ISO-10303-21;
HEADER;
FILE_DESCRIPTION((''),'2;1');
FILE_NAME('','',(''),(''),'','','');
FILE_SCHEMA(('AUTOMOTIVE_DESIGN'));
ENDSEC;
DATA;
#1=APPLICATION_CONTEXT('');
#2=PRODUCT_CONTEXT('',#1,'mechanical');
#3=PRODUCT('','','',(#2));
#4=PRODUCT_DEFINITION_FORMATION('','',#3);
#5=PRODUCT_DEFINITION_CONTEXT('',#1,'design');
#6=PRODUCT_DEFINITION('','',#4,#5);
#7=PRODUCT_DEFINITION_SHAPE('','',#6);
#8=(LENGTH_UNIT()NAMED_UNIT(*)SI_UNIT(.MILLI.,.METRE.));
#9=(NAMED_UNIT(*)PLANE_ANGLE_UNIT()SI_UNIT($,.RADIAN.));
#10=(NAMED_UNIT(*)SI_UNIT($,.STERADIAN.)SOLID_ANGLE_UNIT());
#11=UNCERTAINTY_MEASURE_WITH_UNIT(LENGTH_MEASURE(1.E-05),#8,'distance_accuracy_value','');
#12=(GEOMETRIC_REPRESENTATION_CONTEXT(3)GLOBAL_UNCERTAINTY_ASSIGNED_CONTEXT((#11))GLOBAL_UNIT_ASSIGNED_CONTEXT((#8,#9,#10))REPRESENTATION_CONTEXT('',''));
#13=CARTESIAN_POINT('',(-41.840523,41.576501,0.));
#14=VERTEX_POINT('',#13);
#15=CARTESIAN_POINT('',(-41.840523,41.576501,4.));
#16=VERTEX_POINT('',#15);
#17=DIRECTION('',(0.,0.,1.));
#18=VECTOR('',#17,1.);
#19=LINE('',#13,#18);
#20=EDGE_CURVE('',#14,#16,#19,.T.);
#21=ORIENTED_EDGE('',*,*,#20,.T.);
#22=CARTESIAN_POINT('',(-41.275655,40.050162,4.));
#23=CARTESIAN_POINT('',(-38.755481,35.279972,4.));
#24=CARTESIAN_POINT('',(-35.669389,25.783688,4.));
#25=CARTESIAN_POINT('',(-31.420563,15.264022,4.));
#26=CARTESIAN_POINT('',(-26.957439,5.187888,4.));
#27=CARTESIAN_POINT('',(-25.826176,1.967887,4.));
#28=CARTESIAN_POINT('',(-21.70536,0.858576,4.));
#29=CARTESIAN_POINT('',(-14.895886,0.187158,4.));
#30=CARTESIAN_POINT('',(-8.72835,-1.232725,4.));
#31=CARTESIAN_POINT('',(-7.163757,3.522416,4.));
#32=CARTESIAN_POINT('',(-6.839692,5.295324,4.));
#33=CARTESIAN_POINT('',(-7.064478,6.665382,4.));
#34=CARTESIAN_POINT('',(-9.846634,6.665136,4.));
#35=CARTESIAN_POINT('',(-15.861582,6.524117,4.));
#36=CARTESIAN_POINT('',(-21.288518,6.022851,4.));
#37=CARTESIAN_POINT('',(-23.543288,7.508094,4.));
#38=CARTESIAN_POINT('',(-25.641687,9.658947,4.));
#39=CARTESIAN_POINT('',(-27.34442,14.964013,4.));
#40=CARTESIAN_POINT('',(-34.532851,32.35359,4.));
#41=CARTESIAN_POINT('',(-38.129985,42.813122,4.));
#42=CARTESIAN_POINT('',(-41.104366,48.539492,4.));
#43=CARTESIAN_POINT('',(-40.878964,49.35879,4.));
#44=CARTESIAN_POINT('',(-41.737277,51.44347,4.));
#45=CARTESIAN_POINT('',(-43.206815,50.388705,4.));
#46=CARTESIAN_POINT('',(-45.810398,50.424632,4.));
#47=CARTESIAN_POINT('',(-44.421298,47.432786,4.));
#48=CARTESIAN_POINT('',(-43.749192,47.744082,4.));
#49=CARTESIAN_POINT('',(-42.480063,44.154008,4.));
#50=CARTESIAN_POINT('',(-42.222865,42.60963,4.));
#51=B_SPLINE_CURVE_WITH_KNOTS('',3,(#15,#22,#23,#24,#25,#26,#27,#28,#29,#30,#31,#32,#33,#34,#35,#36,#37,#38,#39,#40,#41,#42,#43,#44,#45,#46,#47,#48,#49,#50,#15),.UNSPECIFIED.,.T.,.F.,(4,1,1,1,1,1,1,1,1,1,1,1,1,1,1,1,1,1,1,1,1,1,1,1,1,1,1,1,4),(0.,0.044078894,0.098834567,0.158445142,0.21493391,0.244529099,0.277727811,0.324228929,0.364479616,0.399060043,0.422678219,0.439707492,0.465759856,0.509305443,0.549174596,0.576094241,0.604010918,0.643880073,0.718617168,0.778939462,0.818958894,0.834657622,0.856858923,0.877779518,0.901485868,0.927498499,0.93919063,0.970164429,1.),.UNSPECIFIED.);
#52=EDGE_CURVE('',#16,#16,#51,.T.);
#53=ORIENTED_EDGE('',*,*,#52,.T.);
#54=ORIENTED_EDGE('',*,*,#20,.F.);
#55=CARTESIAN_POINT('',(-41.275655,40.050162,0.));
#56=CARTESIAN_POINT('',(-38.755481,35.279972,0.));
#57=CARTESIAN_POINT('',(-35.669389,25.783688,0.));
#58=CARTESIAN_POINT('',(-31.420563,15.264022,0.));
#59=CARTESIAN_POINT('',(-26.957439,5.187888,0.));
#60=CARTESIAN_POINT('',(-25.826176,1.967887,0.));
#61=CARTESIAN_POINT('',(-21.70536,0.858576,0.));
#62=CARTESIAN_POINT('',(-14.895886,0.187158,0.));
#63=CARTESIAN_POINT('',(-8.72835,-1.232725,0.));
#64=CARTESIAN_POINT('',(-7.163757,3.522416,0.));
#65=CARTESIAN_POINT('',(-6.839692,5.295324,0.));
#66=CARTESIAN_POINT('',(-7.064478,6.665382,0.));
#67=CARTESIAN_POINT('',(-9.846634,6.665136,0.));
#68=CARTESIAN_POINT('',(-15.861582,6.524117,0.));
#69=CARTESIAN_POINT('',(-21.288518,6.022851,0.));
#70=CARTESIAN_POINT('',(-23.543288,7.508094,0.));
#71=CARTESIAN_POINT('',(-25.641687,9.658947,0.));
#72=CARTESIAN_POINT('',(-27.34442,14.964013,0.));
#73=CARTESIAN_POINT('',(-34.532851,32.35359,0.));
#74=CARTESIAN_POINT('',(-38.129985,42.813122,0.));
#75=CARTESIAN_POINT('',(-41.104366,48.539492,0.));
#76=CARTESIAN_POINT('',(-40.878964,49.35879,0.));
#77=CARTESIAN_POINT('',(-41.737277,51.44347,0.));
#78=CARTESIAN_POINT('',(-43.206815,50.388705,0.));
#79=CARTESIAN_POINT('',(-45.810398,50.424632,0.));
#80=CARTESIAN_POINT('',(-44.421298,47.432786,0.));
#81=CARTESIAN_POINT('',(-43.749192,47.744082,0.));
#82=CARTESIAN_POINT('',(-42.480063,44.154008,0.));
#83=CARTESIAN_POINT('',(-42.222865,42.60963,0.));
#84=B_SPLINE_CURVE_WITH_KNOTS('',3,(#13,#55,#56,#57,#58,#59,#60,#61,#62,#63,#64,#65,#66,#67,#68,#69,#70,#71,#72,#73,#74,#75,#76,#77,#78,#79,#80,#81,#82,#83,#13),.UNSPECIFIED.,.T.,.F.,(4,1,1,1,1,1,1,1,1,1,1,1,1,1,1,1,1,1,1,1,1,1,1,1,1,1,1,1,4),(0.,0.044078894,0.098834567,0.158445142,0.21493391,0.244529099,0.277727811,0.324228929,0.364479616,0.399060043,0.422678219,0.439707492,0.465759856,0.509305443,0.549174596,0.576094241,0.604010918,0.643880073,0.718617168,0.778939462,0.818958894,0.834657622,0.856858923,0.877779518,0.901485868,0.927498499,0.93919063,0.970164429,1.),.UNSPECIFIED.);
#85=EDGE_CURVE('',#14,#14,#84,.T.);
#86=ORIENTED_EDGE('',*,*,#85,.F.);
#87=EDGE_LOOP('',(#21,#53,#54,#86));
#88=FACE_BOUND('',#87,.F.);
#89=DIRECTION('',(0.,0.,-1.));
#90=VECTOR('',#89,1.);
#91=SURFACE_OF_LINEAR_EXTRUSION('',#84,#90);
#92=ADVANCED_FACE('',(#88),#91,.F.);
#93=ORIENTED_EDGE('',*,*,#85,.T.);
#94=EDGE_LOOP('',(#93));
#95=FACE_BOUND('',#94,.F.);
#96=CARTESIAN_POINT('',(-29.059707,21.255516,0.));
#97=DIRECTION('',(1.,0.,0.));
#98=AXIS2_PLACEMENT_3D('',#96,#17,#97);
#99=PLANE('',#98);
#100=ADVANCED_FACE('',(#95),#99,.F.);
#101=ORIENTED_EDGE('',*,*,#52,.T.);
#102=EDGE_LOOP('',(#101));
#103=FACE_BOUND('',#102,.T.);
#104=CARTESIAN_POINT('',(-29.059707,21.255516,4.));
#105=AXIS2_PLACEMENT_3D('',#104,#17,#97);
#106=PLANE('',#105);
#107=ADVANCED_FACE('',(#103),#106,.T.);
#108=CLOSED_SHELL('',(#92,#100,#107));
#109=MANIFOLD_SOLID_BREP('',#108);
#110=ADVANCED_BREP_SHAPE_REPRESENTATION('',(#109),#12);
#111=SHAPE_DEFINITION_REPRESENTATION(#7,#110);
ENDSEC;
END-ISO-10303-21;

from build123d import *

# Parameters (mm, degrees)
F1_DEPTH = 4


with BuildPart() as f1:
    # F0 (on Top) → F1 (new body)
    with BuildSketch(Plane.XY):
        with BuildLine():
            add(Edge.make_bspline(
                [(-41.8405234814, 41.576500982), (-41.2756549979, 40.050161733), (-38.7554814539, 35.2799722842), (-35.6693893631, 25.7836878676), (-31.4205632812, 15.2640216764), (-26.9574393655, 5.1878876169), (-25.8261755279, 1.9678871554), (-21.7053599167, 0.8585764454), (-14.8958864144, 0.1871575539), (-8.7283496251, -1.2327251094), (-7.163756936, 3.5224157584), (-6.8396922591, 5.2953236731), (-7.0644775675, 6.6653817783), (-9.8466335717, 6.6651361239), (-15.861581921, 6.5241170497), (-21.2885182258, 6.022851137), (-23.5432878903, 7.5080935146), (-25.6416865806, 9.6589473346), (-27.344420002, 14.9640125097), (-34.5328510969, 32.3535899585), (-38.1299849231, 42.8131223834), (-41.1043656621, 48.5394918336), (-40.8789636798, 49.3587895315), (-41.7372767722, 51.4434704176), (-43.2068150975, 50.3887045839), (-45.8103981353, 50.424632306), (-44.4212977902, 47.4327862859), (-43.749191593, 47.7440821239), (-42.4800625696, 44.1540081563), (-42.2228646083, 42.6096304371), (-41.8405234814, 41.576500982)],
                knots=[0, 0, 0, 0, 0.044078894, 0.0988345667, 0.158445142, 0.21493391, 0.2445290992, 0.2777278111, 0.3242289295, 0.3644796163, 0.3990600428, 0.422678219, 0.4397074923, 0.4657598558, 0.5093054427, 0.5491745963, 0.5760942414, 0.6040109182, 0.6438800734, 0.718617168, 0.7789394617, 0.8189588942, 0.8346576216, 0.8568589227, 0.8777795184, 0.9014858675, 0.9274984995, 0.9391906305, 0.9701644286, 1, 1, 1, 1], degree=3))
        make_face()
    extrude(amount=F1_DEPTH)


solid = f1.part
